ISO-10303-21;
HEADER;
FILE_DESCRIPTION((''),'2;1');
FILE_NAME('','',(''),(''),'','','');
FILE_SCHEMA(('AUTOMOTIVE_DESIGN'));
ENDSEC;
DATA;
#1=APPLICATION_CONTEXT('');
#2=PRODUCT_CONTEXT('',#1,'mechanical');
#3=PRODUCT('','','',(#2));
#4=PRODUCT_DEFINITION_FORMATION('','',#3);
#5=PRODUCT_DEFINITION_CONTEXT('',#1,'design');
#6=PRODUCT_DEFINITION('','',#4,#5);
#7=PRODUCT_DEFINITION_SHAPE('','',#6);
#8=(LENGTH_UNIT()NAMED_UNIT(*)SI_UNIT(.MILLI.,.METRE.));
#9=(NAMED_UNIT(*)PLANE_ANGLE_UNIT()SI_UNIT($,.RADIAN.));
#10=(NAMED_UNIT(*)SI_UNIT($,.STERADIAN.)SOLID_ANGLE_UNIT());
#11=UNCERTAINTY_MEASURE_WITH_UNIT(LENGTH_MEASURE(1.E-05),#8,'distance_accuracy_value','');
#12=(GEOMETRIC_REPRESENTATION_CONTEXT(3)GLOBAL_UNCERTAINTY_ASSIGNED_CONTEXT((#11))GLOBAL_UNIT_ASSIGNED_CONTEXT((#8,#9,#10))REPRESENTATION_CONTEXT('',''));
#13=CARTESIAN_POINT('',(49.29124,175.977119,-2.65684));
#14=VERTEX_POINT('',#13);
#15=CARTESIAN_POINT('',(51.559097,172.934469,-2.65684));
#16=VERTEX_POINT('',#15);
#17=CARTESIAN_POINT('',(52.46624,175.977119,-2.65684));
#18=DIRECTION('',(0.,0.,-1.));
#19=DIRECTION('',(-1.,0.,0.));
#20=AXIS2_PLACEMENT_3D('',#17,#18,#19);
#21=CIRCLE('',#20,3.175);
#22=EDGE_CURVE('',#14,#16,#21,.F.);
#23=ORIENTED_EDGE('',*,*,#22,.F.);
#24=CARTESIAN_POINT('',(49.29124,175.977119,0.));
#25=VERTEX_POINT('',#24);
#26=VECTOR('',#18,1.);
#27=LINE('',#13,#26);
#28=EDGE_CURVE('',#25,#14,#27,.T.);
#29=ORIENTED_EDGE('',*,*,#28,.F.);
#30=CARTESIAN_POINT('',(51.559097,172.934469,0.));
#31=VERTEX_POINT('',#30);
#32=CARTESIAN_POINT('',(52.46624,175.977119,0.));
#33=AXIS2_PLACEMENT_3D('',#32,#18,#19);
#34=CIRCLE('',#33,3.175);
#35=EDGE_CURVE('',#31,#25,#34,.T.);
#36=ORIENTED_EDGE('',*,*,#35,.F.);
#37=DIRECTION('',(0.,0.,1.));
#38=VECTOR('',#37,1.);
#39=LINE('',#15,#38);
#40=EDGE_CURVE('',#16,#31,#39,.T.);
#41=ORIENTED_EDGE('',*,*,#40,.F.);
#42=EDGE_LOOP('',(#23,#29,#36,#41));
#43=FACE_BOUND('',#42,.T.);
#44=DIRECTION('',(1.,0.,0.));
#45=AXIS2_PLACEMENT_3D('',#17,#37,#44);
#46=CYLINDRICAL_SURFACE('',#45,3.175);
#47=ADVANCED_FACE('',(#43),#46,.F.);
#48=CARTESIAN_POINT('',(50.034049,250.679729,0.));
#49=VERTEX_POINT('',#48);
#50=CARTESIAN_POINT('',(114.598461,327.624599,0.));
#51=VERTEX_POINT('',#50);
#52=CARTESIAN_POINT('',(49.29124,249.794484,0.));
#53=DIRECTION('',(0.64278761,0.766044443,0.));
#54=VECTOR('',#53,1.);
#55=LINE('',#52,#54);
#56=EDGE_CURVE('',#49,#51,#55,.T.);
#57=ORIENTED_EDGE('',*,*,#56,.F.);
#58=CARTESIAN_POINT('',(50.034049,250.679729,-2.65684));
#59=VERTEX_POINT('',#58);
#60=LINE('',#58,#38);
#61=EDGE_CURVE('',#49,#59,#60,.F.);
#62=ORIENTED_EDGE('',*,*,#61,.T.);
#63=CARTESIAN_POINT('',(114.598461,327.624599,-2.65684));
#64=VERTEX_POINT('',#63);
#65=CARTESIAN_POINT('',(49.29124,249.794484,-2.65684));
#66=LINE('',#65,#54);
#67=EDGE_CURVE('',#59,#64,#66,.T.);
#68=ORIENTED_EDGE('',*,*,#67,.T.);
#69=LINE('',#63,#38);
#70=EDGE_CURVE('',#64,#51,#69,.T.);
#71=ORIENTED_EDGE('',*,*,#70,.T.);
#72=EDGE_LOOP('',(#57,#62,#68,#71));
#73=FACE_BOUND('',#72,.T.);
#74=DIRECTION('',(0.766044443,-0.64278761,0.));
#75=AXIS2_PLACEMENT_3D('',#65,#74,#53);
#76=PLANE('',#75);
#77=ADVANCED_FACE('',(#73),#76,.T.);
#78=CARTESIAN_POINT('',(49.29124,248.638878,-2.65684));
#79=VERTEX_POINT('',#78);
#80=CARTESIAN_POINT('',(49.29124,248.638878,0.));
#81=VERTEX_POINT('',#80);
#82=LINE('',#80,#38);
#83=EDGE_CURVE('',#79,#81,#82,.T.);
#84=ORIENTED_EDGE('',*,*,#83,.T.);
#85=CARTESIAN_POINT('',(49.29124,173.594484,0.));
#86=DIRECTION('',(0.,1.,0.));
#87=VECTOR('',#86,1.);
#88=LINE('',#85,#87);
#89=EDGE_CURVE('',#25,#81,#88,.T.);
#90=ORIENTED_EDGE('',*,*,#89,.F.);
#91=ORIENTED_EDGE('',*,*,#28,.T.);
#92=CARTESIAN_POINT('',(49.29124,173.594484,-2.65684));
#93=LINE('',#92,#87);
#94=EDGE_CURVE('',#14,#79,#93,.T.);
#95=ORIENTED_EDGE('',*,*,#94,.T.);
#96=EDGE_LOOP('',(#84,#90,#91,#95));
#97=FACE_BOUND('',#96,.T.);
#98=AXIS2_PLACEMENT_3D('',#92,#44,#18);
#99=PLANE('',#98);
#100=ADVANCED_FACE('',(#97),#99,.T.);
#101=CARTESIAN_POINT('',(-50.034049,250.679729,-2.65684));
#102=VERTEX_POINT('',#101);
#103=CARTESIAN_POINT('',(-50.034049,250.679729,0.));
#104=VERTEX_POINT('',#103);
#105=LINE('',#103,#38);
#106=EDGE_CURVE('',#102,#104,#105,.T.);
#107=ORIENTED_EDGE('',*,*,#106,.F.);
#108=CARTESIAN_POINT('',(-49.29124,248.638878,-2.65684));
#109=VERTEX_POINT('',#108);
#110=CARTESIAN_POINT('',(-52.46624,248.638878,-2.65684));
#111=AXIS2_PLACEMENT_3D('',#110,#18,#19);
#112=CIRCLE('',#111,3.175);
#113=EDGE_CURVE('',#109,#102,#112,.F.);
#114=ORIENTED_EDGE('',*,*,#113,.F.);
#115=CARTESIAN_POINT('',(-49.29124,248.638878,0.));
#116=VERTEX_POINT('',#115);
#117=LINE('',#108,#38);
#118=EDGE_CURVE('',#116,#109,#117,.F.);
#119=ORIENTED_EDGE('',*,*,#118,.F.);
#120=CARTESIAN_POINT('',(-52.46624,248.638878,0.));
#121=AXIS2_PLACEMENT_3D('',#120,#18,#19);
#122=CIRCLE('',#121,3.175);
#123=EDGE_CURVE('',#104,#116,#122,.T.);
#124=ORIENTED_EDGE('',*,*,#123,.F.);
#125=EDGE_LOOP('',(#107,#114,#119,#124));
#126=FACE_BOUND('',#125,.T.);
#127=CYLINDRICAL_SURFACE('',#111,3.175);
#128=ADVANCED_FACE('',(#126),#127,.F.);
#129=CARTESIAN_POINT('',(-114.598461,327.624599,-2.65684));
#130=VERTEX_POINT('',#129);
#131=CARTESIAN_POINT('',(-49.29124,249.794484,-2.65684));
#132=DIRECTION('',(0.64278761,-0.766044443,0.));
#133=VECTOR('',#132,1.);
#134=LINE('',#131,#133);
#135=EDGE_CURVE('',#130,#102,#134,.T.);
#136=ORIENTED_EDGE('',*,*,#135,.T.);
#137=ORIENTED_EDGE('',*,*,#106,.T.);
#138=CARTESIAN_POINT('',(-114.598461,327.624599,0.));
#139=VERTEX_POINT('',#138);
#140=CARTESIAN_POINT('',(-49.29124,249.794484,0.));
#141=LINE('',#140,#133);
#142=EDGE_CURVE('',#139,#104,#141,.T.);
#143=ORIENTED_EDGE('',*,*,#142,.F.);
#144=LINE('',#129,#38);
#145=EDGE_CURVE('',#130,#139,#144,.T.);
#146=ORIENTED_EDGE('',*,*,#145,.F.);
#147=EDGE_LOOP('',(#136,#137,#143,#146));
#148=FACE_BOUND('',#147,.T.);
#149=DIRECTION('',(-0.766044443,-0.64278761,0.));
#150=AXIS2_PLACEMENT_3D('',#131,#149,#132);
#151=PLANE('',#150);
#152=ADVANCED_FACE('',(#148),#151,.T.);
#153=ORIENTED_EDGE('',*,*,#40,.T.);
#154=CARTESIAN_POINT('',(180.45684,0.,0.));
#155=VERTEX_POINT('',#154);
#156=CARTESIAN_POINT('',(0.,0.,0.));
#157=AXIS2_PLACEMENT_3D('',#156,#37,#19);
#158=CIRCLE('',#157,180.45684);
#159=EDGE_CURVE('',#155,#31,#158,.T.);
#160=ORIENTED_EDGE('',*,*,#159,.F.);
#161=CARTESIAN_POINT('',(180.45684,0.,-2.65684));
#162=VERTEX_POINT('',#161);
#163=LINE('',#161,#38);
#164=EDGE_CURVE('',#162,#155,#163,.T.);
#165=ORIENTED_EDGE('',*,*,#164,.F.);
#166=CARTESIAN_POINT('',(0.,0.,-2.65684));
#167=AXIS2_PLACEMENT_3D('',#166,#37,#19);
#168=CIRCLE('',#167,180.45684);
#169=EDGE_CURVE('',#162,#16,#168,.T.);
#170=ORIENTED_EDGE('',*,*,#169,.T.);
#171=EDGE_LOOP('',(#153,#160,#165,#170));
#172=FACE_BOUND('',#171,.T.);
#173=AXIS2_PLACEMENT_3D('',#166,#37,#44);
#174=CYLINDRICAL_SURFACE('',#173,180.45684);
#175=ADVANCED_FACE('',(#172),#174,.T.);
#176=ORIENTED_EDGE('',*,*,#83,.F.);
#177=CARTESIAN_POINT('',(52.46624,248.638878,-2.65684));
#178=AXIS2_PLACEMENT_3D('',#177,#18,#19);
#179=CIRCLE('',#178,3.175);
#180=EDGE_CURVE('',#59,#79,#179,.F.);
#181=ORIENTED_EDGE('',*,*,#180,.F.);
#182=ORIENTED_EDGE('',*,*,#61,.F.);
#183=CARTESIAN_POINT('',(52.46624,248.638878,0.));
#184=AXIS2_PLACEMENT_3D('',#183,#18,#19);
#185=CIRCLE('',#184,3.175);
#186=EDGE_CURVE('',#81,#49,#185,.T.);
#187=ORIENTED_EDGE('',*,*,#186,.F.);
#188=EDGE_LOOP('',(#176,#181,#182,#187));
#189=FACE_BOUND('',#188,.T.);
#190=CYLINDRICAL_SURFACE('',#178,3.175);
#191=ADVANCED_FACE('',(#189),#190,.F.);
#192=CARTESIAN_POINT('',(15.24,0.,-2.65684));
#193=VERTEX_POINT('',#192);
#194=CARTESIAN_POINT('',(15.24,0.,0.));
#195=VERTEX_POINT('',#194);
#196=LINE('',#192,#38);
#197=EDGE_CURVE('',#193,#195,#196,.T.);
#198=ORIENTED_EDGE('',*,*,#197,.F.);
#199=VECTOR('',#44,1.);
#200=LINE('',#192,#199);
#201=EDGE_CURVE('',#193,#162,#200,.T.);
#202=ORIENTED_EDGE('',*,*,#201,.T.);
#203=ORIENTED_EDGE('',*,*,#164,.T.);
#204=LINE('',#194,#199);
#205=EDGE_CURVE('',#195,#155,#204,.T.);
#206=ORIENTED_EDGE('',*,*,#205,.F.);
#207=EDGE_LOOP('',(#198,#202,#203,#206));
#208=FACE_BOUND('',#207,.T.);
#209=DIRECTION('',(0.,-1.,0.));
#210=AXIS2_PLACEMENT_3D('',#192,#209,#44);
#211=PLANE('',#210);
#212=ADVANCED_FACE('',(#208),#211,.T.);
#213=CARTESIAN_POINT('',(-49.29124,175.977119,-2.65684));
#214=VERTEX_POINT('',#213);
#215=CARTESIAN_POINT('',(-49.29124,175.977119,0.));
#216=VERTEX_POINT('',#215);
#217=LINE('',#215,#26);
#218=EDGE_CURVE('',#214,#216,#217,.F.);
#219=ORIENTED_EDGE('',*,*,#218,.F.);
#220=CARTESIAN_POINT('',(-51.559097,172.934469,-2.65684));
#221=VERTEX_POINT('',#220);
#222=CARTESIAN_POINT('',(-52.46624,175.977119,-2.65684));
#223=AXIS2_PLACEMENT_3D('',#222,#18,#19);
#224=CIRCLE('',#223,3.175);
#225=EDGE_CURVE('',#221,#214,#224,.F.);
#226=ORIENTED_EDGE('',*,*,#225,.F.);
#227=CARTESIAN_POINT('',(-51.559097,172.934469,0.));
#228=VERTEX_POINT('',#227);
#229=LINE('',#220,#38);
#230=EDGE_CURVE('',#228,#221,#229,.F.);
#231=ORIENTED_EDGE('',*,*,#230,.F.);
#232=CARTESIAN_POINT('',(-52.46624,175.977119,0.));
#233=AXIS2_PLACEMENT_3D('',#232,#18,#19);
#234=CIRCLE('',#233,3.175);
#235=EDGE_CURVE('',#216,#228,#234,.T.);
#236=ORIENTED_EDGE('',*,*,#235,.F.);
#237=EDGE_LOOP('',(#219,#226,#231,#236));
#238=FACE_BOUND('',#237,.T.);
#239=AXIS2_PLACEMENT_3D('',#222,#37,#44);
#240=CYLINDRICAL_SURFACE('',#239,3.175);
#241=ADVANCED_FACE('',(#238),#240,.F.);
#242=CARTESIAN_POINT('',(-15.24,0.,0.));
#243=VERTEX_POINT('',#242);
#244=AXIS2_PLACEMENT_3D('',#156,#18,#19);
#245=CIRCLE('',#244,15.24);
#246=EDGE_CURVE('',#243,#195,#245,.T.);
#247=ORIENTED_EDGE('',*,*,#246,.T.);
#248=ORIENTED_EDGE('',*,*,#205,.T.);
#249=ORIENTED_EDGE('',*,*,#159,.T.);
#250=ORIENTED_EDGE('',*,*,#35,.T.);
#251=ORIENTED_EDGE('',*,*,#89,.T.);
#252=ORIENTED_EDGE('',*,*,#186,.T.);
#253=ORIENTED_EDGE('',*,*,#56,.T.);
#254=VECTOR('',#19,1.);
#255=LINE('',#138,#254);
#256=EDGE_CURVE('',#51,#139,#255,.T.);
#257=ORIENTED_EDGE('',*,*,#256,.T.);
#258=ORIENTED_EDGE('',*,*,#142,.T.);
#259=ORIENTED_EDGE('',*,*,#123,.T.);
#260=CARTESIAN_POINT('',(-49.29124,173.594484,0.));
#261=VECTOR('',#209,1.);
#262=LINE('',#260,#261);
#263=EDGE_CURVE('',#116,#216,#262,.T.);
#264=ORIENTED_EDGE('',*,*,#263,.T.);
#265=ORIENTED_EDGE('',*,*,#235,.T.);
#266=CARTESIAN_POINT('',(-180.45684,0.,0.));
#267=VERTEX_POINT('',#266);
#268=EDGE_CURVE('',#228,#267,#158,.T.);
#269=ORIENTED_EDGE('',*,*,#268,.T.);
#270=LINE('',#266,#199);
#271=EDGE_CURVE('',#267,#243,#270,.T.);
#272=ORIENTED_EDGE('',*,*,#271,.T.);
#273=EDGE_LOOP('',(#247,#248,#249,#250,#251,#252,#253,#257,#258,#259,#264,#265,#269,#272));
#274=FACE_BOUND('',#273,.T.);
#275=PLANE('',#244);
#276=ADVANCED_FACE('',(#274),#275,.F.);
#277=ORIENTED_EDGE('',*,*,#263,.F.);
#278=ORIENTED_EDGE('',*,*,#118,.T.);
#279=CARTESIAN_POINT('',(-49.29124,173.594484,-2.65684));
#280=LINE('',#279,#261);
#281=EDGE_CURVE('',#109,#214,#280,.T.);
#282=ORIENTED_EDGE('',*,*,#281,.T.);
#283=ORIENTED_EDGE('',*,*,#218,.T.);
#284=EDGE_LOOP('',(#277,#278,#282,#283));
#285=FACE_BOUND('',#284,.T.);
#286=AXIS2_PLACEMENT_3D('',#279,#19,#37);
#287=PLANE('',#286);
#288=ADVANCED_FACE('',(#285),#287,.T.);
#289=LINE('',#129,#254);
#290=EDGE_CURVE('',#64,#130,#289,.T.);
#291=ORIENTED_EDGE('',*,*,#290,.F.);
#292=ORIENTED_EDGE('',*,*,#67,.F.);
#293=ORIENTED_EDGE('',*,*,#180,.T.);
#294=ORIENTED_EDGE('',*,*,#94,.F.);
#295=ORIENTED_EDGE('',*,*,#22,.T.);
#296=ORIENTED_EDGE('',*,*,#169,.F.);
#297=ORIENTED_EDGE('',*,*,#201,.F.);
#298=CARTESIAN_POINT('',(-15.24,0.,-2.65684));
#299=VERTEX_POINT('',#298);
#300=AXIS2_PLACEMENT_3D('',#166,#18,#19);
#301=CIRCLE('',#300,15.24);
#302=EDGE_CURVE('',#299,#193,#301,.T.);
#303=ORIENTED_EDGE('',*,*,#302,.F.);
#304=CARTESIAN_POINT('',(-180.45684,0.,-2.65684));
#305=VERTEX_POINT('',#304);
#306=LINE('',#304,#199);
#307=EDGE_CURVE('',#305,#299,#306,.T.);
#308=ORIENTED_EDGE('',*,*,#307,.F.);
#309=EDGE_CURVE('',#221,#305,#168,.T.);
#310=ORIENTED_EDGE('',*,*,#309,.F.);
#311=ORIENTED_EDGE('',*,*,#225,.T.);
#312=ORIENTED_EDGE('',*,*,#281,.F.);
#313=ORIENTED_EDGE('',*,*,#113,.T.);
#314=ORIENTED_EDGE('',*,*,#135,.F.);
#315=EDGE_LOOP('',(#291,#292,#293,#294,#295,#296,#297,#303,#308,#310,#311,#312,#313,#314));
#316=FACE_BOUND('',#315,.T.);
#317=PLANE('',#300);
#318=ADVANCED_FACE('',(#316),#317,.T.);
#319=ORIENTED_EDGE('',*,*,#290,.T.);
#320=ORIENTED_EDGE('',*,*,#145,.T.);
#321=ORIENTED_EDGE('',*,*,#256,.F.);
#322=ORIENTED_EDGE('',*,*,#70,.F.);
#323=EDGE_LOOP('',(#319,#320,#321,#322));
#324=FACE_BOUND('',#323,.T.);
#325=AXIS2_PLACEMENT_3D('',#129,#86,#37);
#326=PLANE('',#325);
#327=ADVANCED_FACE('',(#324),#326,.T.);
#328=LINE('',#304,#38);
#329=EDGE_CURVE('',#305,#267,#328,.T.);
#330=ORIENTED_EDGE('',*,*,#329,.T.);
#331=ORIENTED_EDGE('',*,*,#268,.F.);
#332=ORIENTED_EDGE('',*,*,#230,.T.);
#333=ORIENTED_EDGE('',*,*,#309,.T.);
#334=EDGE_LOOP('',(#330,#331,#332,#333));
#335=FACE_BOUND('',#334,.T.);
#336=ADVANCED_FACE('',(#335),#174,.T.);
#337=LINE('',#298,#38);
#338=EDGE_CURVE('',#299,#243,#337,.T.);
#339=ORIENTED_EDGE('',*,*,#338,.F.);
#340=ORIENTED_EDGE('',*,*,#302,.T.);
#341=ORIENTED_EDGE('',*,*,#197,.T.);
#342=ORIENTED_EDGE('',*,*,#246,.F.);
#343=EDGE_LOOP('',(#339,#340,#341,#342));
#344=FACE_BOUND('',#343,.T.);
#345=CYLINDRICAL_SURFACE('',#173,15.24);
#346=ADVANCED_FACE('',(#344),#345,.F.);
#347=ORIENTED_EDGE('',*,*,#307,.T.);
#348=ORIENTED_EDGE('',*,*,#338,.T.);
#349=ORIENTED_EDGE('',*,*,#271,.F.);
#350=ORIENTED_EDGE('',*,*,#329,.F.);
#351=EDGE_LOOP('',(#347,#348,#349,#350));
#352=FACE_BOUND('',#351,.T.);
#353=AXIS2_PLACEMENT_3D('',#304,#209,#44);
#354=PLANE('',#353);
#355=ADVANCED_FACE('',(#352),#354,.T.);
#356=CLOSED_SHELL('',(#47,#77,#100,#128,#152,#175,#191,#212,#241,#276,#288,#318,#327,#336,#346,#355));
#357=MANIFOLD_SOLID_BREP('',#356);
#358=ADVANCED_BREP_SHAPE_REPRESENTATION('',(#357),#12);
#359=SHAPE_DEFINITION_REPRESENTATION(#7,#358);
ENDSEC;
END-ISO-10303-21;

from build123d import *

# Parameters (mm, degrees)
BASE_FLANGE1_DEPTH = 2.65684
FILLET1_R          = 3.175


# Sheet-metal steps are written as plain solids
with BuildPart() as part:
    # Sketch1 → Base-Flange1 (new body)
    with BuildSketch(Plane.XY):
        with BuildLine():
            Line((-180.45684, 0), (-15.24, 0))
            ThreePointArc((-15.24, 0), (0, 15.24), (15.24, 0))
            Line((15.24, 0), (180.45684, 0))
            ThreePointArc((180.45684, 0), (143.97849234, 108.788165011), (49.29124, 173.594483674))
            Line((49.29124, 173.594483674), (49.29124, 249.794483674))
            Line((49.29124, 249.794483674), (114.598461144, 327.624599095))
            Line((114.598461144, 327.624599095), (-114.598461144, 327.624599095))
            Line((-114.598461144, 327.624599095), (-49.29124, 249.794483674))
            Line((-49.29124, 249.794483674), (-49.29124, 173.594483674))
            ThreePointArc((-49.29124, 173.594483674), (-143.97849234, 108.788165011), (-180.45684, 0))
        make_face()
    extrude(amount=-BASE_FLANGE1_DEPTH)

    # Fillet1
    fillet1_edges = [part.edges().sort_by_distance(p)[0] for p in [
        (-49.29124, 173.594483674, -1.32842),
        (-49.29124, 249.794483674, -1.32842),
        (49.29124, 249.794483674, -1.32842),
        (49.29124, 173.594483674, -1.32842),
    ]]
    fillet(fillet1_edges, radius=FILLET1_R)


solid = part.part
